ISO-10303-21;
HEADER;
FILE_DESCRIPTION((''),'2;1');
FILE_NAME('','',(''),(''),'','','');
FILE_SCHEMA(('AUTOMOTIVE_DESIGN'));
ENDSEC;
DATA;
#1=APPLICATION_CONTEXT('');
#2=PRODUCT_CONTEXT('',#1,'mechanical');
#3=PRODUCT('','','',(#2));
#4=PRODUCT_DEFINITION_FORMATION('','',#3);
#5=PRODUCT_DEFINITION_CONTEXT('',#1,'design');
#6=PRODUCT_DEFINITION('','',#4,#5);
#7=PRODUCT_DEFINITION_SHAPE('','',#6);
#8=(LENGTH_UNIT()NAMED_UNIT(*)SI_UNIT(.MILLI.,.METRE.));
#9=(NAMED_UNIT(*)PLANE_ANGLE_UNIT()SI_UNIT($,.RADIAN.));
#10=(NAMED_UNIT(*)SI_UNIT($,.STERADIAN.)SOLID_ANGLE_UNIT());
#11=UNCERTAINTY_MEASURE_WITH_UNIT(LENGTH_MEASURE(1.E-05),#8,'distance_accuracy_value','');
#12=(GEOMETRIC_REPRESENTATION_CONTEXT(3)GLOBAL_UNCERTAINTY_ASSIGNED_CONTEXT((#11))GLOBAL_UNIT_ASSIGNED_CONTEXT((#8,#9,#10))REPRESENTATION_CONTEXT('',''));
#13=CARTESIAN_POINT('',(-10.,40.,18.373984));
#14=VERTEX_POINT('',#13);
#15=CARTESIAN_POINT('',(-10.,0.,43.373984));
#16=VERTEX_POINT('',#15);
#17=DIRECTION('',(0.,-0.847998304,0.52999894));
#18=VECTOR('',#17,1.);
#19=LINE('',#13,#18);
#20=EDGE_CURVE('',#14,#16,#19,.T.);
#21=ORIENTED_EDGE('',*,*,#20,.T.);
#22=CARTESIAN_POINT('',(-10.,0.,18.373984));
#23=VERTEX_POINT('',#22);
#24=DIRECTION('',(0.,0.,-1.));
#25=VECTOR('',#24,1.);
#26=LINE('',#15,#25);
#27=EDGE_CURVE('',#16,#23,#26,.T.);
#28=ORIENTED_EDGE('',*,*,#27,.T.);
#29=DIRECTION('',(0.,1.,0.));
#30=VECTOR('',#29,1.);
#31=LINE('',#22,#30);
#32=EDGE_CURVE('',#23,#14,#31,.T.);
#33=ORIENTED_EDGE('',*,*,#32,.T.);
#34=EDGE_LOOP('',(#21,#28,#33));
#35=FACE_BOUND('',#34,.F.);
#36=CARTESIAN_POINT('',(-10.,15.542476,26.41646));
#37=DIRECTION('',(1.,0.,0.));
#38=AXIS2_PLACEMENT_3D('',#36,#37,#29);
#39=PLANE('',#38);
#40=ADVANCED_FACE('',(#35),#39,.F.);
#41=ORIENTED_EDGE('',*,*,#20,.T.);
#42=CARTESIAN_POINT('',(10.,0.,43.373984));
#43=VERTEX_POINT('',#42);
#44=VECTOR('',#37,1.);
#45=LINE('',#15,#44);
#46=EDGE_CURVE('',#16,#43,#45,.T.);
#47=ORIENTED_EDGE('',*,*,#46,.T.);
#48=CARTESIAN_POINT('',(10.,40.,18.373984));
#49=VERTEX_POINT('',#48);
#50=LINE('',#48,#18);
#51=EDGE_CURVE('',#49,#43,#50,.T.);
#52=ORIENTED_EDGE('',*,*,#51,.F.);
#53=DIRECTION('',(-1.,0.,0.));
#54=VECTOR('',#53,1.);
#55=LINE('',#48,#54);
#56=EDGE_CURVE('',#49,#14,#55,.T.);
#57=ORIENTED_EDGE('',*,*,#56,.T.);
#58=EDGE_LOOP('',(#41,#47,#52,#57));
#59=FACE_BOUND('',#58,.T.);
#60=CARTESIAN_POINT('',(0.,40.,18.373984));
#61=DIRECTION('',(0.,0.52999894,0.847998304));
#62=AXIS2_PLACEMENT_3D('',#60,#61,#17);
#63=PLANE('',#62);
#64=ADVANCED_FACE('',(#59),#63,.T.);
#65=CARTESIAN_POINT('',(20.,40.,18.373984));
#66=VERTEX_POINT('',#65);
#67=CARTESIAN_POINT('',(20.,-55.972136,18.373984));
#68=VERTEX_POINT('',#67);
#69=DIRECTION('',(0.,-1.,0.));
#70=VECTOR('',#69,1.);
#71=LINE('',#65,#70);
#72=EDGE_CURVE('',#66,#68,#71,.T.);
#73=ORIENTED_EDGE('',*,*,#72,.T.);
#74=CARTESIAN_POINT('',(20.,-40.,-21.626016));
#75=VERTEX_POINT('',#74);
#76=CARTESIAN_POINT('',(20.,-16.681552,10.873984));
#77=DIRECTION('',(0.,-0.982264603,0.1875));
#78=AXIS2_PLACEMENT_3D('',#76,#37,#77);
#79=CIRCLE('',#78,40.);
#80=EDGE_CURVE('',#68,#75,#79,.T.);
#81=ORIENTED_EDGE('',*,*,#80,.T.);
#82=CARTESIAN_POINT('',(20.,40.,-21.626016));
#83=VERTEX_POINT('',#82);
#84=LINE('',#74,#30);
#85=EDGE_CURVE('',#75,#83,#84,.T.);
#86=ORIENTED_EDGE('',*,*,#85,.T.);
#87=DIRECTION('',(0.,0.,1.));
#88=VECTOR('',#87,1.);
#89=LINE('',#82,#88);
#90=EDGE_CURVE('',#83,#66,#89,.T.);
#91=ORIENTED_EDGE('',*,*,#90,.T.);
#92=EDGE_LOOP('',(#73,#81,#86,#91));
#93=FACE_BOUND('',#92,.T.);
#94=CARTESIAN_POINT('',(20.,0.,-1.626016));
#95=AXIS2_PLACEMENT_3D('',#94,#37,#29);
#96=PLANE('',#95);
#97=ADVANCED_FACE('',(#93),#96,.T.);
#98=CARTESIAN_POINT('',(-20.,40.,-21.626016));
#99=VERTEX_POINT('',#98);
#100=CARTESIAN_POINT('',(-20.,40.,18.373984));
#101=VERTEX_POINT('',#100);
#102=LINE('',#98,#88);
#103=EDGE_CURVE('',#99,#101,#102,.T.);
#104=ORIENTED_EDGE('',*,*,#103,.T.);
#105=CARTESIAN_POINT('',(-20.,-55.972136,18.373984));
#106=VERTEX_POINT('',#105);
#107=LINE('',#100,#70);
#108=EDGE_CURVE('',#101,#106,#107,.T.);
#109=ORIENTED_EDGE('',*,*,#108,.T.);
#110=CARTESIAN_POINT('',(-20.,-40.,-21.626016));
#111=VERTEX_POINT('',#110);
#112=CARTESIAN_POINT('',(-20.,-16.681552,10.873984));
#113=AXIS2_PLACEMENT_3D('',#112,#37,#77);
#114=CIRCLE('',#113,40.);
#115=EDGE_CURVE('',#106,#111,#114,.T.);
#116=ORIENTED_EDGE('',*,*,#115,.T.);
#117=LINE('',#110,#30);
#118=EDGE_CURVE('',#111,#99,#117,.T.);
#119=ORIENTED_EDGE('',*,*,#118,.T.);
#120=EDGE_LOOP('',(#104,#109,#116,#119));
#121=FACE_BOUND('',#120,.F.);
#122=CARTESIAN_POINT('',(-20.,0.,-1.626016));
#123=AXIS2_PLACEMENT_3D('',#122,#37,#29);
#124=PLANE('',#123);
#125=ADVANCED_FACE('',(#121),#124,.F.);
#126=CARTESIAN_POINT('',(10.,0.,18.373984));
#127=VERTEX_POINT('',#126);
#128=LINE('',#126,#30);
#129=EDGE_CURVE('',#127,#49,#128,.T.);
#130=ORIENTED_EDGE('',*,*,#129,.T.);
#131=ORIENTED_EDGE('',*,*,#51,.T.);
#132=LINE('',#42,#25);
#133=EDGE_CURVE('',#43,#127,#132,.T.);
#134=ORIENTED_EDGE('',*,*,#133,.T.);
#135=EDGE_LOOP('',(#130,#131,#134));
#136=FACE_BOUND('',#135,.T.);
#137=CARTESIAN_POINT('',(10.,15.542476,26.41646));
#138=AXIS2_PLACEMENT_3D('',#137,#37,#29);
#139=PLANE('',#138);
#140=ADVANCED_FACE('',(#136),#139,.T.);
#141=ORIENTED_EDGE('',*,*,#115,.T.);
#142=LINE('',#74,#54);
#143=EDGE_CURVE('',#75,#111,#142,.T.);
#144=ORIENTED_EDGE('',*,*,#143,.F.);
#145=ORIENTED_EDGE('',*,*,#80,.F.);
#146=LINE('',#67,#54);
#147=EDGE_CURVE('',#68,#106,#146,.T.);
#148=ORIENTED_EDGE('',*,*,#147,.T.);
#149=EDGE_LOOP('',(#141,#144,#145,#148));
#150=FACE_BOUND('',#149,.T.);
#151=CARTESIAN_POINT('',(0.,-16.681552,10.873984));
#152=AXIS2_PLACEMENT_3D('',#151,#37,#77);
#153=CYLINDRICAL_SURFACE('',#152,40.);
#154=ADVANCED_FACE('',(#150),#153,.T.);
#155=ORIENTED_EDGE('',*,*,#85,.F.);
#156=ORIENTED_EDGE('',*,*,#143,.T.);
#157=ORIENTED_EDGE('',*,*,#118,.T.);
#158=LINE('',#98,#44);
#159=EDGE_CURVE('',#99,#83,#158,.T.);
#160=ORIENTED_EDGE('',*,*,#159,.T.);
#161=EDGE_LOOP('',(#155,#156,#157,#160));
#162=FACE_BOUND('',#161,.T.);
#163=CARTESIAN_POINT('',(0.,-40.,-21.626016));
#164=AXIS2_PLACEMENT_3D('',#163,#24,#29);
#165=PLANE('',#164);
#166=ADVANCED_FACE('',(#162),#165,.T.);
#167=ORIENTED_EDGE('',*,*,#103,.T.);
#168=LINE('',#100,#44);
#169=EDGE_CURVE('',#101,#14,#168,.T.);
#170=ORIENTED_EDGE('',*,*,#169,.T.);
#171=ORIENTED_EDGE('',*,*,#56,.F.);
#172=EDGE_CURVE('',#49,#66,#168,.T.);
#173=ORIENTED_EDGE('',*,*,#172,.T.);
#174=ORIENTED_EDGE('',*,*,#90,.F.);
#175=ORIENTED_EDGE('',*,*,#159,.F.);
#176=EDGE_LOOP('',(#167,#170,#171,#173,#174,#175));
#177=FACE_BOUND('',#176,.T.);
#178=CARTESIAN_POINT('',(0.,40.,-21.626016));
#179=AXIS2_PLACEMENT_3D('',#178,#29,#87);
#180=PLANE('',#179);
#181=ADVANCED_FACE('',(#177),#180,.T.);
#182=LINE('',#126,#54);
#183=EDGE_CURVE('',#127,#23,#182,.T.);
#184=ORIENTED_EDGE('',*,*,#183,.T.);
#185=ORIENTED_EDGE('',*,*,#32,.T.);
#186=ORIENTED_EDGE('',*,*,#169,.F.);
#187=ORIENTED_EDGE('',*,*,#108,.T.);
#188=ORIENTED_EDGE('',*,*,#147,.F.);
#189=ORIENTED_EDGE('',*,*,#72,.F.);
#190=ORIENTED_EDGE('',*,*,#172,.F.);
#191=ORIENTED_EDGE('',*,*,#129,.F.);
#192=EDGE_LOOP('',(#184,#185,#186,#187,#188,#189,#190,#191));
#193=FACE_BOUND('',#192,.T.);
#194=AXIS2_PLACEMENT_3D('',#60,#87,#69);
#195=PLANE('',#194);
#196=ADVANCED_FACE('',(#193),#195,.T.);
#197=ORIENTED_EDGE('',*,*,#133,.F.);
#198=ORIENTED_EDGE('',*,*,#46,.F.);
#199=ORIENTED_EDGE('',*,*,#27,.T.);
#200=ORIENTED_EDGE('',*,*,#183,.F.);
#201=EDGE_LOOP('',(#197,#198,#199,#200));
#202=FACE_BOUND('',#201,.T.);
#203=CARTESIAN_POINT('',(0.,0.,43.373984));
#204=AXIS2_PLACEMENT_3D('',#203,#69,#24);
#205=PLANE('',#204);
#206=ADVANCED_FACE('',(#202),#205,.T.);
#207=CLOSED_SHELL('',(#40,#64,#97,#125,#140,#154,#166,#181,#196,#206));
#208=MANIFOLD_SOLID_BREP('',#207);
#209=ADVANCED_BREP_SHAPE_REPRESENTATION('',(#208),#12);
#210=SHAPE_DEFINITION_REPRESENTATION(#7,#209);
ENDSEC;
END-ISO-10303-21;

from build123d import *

# Parameters (mm, degrees)
F1_DEPTH = 20
F3_DEPTH = 10


# Not quite as in the source:
# - a feature of the source that left no trace in its solid (it failed there, or was rolled back) is left out


with BuildPart() as f1:
    # F0 (on Right) → F1 (new body, symmetric)
    with BuildSketch(Plane.YZ):
        Polygon((-27.5, 18.3739837377), (-40, 18.3739837377), (-40, -21.6260162623), (40, -21.6260162623), (40, 18.3739837377), (11.153018102, 18.3739837377), (0, 18.3739837377), (-5, 18.3739837377), (-17.5, 18.3739837377), align=None)
        with BuildLine():
            Line((-40, -21.6260162623), (-40, 18.3739837377))
            Line((-40, 18.3739837377), (-50.9159490466, 18.3739837377))
            Line((-50.9159490466, 18.3739837377), (-55.972136481, 18.3739837377))
            ThreePointArc((-55.972136481, 18.3739837377), (-53.829536351, -3.9593330169), (-40, -21.6260162623))
        make_face()
    extrude(amount=F1_DEPTH, both=True)

    # F0 (on Right) → F3 (join, symmetric)
    with BuildSketch(Plane.YZ):
        Polygon((11.153018102, 18.3739837377), (40, 18.3739837377), (0, 43.3739837377), (0, 18.3739837377), align=None)
    extrude(amount=F3_DEPTH, both=True)


solid = f1.part
